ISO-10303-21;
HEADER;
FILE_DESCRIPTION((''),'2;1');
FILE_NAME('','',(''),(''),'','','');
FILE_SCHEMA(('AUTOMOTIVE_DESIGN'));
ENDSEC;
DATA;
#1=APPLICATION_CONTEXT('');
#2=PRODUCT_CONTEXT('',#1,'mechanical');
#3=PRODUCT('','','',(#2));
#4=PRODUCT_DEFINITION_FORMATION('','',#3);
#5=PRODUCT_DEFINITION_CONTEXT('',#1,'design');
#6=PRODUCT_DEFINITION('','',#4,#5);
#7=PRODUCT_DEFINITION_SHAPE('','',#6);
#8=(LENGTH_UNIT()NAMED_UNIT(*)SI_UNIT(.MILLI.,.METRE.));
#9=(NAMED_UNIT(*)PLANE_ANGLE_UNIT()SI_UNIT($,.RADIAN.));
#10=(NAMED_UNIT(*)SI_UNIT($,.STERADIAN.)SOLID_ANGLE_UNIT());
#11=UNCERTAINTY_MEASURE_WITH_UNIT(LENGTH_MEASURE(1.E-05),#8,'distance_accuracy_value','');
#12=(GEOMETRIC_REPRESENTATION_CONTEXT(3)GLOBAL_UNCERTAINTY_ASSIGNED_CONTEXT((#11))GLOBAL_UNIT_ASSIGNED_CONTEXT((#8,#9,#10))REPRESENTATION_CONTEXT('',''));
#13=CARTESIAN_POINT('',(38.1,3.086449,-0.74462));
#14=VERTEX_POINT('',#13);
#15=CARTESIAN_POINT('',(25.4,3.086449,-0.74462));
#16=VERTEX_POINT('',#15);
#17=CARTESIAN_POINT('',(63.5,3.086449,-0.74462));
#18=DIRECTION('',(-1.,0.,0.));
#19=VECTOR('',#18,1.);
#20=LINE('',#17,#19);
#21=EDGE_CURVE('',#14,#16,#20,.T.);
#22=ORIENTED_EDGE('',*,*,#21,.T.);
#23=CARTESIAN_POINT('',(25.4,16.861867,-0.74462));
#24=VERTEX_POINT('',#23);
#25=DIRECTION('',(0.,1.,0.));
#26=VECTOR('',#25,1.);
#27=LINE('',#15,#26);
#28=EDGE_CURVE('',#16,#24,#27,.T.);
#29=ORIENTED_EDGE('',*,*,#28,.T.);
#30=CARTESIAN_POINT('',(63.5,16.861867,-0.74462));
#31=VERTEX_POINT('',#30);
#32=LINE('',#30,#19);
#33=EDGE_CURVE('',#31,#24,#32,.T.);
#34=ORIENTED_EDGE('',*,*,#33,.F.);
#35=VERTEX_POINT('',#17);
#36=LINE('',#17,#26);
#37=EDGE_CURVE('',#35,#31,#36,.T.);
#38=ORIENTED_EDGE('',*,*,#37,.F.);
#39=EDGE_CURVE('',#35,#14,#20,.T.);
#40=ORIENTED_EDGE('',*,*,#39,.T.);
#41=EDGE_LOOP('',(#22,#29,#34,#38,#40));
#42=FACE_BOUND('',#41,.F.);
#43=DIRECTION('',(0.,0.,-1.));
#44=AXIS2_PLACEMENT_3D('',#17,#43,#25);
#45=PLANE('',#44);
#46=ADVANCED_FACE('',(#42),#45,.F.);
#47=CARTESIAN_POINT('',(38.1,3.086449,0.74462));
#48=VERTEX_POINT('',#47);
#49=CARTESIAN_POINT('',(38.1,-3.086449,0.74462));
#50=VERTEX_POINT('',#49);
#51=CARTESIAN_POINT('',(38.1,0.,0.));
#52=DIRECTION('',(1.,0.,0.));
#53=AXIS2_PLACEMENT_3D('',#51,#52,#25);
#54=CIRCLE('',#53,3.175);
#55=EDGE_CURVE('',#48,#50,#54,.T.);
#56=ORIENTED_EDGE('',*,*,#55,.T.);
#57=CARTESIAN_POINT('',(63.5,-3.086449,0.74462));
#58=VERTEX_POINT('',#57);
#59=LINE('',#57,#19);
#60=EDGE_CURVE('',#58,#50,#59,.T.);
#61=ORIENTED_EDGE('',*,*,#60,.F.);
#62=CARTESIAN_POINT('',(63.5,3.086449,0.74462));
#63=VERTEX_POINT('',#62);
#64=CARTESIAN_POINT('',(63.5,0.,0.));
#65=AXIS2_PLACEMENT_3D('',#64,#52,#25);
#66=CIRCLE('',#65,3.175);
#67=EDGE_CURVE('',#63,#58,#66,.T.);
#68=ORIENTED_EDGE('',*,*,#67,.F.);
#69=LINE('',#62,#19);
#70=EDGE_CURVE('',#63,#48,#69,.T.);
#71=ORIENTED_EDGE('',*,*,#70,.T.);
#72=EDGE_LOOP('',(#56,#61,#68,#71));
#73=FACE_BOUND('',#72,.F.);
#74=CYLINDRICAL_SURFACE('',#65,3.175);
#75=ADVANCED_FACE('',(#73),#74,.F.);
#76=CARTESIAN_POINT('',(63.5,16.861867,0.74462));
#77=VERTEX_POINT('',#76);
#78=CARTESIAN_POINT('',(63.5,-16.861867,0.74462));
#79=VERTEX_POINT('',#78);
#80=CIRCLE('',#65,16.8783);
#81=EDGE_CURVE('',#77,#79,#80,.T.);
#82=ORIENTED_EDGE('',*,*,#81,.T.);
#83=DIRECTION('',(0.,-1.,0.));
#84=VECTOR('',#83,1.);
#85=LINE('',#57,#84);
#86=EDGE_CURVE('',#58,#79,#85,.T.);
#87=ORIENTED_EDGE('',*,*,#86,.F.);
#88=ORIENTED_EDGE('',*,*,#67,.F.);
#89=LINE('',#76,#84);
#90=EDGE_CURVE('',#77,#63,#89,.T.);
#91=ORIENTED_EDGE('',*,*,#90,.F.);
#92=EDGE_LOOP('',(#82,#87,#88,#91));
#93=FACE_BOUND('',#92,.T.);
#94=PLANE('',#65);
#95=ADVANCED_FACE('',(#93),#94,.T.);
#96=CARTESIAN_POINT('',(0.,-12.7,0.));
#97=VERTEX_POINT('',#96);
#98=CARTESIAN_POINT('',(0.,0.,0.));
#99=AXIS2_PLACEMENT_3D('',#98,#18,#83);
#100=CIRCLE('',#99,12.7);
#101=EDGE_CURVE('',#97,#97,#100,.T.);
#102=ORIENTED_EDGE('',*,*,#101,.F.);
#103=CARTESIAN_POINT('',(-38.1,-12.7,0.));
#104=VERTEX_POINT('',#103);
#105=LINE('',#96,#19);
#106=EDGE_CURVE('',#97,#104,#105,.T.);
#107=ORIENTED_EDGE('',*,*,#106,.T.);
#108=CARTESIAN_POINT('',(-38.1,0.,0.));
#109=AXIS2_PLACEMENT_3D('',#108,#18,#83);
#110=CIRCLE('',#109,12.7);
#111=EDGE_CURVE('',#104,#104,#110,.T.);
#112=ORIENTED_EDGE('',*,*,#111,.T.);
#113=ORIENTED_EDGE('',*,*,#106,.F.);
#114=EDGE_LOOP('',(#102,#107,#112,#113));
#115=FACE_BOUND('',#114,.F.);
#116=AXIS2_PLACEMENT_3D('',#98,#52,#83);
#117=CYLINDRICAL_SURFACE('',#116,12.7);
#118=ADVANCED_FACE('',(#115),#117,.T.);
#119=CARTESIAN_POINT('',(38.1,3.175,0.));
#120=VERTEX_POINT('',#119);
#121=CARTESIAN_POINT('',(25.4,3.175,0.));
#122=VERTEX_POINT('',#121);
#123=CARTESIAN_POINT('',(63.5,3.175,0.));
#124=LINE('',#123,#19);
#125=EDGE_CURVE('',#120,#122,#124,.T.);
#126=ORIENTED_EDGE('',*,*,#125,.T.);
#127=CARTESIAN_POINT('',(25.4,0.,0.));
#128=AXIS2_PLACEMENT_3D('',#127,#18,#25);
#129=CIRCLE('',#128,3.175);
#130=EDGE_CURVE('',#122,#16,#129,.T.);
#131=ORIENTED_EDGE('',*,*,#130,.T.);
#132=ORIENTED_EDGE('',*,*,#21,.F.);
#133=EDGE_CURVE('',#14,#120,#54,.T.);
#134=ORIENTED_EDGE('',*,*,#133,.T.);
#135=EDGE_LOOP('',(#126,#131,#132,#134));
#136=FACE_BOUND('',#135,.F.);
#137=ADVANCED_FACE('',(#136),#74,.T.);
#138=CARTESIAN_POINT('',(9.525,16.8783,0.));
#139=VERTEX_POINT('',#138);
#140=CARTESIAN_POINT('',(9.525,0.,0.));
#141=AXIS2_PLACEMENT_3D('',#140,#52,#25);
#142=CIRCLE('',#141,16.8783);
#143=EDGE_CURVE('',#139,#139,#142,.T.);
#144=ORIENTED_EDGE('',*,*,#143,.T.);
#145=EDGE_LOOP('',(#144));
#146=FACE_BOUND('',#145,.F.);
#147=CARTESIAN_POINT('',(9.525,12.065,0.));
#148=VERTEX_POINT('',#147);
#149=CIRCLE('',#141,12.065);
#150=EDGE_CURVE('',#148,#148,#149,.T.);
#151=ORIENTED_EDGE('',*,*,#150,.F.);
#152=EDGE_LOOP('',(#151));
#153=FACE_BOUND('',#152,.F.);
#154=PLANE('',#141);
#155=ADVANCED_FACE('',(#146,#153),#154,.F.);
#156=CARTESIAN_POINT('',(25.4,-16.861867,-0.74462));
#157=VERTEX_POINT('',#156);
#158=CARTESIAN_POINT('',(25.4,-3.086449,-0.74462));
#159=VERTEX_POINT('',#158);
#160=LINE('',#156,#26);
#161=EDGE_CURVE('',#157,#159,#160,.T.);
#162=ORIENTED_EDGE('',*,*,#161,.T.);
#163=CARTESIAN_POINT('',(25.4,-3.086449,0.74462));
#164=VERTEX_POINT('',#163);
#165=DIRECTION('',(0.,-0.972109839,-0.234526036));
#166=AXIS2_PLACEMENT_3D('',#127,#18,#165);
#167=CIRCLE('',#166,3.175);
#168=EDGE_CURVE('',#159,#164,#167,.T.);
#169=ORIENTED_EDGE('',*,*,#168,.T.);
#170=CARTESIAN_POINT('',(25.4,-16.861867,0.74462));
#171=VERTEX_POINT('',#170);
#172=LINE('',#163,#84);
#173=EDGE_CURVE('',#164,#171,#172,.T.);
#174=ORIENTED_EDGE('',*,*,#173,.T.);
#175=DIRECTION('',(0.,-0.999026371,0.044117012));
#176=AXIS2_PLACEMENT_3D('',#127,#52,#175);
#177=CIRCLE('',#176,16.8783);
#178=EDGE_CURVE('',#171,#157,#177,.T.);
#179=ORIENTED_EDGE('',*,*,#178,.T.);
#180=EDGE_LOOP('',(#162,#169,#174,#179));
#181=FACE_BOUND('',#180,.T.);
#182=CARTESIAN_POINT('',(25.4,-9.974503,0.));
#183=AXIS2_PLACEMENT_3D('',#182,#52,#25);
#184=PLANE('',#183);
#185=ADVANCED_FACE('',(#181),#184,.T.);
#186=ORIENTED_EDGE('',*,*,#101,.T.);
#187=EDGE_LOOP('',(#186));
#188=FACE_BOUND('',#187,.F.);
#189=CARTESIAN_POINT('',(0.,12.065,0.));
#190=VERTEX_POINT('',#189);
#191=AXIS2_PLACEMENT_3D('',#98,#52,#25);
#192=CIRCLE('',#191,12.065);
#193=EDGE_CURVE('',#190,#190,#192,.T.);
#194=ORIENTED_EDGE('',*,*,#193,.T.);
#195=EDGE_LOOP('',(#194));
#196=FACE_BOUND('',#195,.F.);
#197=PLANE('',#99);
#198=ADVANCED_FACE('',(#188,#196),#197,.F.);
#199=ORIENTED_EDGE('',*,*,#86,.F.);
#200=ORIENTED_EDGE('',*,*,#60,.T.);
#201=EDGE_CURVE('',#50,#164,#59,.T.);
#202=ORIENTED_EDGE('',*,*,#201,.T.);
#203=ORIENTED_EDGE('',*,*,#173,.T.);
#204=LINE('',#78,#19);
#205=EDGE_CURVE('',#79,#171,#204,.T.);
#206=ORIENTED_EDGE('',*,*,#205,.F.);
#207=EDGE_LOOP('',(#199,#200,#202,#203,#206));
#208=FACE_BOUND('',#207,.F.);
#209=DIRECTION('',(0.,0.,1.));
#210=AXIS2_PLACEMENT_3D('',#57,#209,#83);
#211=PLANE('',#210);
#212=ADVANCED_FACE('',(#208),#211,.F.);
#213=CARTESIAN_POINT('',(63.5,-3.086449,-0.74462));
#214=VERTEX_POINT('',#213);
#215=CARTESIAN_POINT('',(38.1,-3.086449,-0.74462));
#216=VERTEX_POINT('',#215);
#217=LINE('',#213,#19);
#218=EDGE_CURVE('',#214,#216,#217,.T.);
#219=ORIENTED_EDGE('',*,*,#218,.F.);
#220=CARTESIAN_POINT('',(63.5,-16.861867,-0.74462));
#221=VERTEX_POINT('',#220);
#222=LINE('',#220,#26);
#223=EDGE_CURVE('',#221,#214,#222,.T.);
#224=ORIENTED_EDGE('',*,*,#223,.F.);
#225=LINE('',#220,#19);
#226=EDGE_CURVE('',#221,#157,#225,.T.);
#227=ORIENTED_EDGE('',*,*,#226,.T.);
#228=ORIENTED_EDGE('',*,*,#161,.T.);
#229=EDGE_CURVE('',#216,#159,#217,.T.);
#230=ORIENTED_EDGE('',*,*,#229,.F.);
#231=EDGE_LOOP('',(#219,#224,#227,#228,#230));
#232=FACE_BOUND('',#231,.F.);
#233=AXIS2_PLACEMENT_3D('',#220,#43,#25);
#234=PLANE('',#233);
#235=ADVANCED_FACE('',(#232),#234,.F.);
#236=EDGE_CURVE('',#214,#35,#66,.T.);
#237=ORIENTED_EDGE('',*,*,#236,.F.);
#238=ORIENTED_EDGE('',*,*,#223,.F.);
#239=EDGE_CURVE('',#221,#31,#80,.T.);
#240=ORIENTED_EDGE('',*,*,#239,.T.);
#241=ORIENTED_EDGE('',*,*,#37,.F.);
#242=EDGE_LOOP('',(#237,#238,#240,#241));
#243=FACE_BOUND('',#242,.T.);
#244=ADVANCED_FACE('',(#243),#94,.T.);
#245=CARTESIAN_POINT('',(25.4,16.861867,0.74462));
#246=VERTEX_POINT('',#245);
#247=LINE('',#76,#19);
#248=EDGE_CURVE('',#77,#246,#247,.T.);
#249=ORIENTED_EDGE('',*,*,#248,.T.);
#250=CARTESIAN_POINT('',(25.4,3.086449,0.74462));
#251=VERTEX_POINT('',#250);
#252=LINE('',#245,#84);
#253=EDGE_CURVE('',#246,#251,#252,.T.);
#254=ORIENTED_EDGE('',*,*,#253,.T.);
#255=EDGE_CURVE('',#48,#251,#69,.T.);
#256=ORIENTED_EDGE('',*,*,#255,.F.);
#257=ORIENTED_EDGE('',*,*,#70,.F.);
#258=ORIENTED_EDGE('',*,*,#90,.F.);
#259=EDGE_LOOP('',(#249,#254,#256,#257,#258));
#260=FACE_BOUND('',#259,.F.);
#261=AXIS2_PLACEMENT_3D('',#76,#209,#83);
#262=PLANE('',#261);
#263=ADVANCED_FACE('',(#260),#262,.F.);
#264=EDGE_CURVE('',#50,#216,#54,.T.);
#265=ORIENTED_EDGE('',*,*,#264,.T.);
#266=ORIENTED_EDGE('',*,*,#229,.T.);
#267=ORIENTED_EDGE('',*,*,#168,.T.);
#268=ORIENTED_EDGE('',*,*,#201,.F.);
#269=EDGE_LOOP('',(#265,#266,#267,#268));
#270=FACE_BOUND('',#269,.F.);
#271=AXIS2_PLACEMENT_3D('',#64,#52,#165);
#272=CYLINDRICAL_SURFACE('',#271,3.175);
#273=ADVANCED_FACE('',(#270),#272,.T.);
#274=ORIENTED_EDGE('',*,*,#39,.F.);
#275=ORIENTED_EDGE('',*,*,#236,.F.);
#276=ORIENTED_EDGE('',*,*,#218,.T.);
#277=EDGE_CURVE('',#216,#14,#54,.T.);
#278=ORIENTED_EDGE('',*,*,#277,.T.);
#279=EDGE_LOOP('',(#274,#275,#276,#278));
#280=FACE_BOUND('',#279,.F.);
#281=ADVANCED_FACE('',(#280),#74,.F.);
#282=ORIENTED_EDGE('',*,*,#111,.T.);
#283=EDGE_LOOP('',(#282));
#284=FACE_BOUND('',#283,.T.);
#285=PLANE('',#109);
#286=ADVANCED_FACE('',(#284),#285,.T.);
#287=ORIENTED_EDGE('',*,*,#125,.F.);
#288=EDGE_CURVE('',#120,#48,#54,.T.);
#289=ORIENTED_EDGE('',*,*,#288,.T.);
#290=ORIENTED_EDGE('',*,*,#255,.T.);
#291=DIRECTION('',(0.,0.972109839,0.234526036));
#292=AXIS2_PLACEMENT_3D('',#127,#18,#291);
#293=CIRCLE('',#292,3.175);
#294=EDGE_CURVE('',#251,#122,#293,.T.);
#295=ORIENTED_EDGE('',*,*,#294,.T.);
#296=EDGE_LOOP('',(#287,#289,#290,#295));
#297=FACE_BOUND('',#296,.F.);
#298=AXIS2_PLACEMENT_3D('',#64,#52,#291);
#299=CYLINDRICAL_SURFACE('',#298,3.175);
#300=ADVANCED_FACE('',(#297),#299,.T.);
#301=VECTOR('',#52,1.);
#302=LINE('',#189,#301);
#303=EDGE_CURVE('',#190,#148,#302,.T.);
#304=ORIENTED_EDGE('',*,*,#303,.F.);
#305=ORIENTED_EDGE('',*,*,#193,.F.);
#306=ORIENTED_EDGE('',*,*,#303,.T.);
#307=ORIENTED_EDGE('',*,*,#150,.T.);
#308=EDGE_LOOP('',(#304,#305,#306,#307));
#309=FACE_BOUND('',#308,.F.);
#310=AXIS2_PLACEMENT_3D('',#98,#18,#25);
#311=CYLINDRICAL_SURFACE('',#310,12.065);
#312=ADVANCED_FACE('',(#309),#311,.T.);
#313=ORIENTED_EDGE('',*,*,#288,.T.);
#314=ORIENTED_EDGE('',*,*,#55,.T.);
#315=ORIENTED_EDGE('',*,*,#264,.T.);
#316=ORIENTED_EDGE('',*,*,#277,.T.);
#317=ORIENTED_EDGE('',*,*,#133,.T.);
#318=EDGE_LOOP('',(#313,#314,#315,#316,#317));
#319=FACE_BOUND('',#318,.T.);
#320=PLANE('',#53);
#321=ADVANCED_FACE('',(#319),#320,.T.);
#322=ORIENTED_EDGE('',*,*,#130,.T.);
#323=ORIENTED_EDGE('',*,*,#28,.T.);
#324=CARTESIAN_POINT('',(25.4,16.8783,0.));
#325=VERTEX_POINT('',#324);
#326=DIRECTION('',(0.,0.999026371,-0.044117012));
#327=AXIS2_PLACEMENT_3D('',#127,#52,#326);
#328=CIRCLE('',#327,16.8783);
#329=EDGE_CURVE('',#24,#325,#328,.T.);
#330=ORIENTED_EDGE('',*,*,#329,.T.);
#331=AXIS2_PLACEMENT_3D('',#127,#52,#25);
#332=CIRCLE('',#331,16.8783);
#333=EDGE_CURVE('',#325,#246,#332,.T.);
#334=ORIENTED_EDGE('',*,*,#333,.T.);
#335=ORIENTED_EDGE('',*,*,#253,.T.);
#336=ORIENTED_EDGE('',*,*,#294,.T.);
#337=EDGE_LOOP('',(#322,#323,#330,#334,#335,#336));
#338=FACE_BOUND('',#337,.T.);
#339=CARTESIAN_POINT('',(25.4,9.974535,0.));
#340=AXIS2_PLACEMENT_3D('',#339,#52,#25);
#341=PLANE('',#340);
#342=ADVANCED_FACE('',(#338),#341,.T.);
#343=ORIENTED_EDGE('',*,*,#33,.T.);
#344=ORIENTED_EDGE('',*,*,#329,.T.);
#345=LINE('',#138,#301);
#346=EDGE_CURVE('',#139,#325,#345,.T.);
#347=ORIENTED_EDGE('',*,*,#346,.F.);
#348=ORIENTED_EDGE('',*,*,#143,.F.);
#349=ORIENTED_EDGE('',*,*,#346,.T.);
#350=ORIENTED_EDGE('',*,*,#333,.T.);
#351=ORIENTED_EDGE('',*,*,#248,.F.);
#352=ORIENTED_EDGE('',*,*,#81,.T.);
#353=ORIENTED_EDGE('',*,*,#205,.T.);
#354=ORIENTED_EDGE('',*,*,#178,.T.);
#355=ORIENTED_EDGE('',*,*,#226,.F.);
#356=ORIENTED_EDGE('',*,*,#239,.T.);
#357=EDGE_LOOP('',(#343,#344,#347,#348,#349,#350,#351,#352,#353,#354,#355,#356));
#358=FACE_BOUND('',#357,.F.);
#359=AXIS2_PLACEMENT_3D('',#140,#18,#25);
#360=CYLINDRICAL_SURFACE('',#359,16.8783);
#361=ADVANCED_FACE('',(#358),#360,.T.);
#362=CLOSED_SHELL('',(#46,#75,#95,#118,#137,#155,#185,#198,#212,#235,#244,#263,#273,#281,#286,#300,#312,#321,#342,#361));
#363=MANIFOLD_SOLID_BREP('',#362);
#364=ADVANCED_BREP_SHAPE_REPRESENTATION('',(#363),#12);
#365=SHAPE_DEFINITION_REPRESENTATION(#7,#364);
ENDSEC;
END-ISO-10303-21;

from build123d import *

# Parameters (mm, degrees)
F0_R     = 12.065
F1_DEPTH = 9.525
F2_R     = 16.8783
F2_R_2   = 12.065
F3_DEPTH = 53.975
F4_R     = 12.7
F4_R_2   = 12.065
F5_DEPTH = 38.1
F6_R     = 3.175
F7_DEPTH = 25.4
F9_DEPTH = 38.1


with BuildPart() as f1:
    # F0 (on Right) → F1 (new body)
    with BuildSketch(Plane.YZ):
        Circle(F0_R)
    extrude(amount=F1_DEPTH)

    # F2 (on face) → F3 (join)
    with BuildSketch(Plane.YZ.offset(9.525)):
        Circle(F2_R)
        Circle(F2_R_2, mode=Mode.SUBTRACT)
        Circle(F2_R_2)
    extrude(amount=F3_DEPTH)

    # F4 (on face) → F5 (join)
    with BuildSketch(Plane(origin=(0, 0, 0), x_dir=(0, -1, 0), z_dir=(-1, 0, 0))):
        Circle(F4_R)
        Circle(F4_R_2, mode=Mode.SUBTRACT)
        Circle(F4_R_2)
    extrude(amount=F5_DEPTH)

    # F6 (on face) → F7 (cut)
    with BuildSketch(Plane.YZ.offset(63.5)):
        Circle(F6_R)
    extrude(amount=-F7_DEPTH, mode=Mode.SUBTRACT)

    # F8 (on face) → F9 (cut)
    with BuildSketch(Plane.YZ.offset(63.5)):
        with BuildLine():
            ThreePointArc((-16.8618667917, 0.7446201635), (-16.8783, 0), (-16.8618667917, -0.7446201635))
            Line((-16.8618667917, -0.7446201635), (-3.086448738, -0.7446201635))
            ThreePointArc((-3.086448738, -0.7446201635), (-3.175, 0), (-3.086448738, 0.7446201635))
            Line((-3.086448738, 0.7446201635), (-16.8618667917, 0.7446201635))
        make_face()
        with BuildLine():
            Line((3.086448738, -0.7446201635), (16.8618667917, -0.7446201635))
            ThreePointArc((16.8618667917, -0.7446201635), (16.8741911978, -0.3724007378), (16.8783, 0))
            ThreePointArc((16.8783, 0), (16.8741911978, 0.3724007378), (16.8618667917, 0.7446201635))
            Line((16.8618667917, 0.7446201635), (3.086448738, 0.7446201635))
            ThreePointArc((3.086448738, 0.7446201635), (3.1527844632, 0.3749334987), (3.175, 0))
            ThreePointArc((3.175, 0), (3.1527844632, -0.3749334987), (3.086448738, -0.7446201635))
        make_face()
    extrude(amount=-F9_DEPTH, mode=Mode.SUBTRACT)


solid = f1.part
